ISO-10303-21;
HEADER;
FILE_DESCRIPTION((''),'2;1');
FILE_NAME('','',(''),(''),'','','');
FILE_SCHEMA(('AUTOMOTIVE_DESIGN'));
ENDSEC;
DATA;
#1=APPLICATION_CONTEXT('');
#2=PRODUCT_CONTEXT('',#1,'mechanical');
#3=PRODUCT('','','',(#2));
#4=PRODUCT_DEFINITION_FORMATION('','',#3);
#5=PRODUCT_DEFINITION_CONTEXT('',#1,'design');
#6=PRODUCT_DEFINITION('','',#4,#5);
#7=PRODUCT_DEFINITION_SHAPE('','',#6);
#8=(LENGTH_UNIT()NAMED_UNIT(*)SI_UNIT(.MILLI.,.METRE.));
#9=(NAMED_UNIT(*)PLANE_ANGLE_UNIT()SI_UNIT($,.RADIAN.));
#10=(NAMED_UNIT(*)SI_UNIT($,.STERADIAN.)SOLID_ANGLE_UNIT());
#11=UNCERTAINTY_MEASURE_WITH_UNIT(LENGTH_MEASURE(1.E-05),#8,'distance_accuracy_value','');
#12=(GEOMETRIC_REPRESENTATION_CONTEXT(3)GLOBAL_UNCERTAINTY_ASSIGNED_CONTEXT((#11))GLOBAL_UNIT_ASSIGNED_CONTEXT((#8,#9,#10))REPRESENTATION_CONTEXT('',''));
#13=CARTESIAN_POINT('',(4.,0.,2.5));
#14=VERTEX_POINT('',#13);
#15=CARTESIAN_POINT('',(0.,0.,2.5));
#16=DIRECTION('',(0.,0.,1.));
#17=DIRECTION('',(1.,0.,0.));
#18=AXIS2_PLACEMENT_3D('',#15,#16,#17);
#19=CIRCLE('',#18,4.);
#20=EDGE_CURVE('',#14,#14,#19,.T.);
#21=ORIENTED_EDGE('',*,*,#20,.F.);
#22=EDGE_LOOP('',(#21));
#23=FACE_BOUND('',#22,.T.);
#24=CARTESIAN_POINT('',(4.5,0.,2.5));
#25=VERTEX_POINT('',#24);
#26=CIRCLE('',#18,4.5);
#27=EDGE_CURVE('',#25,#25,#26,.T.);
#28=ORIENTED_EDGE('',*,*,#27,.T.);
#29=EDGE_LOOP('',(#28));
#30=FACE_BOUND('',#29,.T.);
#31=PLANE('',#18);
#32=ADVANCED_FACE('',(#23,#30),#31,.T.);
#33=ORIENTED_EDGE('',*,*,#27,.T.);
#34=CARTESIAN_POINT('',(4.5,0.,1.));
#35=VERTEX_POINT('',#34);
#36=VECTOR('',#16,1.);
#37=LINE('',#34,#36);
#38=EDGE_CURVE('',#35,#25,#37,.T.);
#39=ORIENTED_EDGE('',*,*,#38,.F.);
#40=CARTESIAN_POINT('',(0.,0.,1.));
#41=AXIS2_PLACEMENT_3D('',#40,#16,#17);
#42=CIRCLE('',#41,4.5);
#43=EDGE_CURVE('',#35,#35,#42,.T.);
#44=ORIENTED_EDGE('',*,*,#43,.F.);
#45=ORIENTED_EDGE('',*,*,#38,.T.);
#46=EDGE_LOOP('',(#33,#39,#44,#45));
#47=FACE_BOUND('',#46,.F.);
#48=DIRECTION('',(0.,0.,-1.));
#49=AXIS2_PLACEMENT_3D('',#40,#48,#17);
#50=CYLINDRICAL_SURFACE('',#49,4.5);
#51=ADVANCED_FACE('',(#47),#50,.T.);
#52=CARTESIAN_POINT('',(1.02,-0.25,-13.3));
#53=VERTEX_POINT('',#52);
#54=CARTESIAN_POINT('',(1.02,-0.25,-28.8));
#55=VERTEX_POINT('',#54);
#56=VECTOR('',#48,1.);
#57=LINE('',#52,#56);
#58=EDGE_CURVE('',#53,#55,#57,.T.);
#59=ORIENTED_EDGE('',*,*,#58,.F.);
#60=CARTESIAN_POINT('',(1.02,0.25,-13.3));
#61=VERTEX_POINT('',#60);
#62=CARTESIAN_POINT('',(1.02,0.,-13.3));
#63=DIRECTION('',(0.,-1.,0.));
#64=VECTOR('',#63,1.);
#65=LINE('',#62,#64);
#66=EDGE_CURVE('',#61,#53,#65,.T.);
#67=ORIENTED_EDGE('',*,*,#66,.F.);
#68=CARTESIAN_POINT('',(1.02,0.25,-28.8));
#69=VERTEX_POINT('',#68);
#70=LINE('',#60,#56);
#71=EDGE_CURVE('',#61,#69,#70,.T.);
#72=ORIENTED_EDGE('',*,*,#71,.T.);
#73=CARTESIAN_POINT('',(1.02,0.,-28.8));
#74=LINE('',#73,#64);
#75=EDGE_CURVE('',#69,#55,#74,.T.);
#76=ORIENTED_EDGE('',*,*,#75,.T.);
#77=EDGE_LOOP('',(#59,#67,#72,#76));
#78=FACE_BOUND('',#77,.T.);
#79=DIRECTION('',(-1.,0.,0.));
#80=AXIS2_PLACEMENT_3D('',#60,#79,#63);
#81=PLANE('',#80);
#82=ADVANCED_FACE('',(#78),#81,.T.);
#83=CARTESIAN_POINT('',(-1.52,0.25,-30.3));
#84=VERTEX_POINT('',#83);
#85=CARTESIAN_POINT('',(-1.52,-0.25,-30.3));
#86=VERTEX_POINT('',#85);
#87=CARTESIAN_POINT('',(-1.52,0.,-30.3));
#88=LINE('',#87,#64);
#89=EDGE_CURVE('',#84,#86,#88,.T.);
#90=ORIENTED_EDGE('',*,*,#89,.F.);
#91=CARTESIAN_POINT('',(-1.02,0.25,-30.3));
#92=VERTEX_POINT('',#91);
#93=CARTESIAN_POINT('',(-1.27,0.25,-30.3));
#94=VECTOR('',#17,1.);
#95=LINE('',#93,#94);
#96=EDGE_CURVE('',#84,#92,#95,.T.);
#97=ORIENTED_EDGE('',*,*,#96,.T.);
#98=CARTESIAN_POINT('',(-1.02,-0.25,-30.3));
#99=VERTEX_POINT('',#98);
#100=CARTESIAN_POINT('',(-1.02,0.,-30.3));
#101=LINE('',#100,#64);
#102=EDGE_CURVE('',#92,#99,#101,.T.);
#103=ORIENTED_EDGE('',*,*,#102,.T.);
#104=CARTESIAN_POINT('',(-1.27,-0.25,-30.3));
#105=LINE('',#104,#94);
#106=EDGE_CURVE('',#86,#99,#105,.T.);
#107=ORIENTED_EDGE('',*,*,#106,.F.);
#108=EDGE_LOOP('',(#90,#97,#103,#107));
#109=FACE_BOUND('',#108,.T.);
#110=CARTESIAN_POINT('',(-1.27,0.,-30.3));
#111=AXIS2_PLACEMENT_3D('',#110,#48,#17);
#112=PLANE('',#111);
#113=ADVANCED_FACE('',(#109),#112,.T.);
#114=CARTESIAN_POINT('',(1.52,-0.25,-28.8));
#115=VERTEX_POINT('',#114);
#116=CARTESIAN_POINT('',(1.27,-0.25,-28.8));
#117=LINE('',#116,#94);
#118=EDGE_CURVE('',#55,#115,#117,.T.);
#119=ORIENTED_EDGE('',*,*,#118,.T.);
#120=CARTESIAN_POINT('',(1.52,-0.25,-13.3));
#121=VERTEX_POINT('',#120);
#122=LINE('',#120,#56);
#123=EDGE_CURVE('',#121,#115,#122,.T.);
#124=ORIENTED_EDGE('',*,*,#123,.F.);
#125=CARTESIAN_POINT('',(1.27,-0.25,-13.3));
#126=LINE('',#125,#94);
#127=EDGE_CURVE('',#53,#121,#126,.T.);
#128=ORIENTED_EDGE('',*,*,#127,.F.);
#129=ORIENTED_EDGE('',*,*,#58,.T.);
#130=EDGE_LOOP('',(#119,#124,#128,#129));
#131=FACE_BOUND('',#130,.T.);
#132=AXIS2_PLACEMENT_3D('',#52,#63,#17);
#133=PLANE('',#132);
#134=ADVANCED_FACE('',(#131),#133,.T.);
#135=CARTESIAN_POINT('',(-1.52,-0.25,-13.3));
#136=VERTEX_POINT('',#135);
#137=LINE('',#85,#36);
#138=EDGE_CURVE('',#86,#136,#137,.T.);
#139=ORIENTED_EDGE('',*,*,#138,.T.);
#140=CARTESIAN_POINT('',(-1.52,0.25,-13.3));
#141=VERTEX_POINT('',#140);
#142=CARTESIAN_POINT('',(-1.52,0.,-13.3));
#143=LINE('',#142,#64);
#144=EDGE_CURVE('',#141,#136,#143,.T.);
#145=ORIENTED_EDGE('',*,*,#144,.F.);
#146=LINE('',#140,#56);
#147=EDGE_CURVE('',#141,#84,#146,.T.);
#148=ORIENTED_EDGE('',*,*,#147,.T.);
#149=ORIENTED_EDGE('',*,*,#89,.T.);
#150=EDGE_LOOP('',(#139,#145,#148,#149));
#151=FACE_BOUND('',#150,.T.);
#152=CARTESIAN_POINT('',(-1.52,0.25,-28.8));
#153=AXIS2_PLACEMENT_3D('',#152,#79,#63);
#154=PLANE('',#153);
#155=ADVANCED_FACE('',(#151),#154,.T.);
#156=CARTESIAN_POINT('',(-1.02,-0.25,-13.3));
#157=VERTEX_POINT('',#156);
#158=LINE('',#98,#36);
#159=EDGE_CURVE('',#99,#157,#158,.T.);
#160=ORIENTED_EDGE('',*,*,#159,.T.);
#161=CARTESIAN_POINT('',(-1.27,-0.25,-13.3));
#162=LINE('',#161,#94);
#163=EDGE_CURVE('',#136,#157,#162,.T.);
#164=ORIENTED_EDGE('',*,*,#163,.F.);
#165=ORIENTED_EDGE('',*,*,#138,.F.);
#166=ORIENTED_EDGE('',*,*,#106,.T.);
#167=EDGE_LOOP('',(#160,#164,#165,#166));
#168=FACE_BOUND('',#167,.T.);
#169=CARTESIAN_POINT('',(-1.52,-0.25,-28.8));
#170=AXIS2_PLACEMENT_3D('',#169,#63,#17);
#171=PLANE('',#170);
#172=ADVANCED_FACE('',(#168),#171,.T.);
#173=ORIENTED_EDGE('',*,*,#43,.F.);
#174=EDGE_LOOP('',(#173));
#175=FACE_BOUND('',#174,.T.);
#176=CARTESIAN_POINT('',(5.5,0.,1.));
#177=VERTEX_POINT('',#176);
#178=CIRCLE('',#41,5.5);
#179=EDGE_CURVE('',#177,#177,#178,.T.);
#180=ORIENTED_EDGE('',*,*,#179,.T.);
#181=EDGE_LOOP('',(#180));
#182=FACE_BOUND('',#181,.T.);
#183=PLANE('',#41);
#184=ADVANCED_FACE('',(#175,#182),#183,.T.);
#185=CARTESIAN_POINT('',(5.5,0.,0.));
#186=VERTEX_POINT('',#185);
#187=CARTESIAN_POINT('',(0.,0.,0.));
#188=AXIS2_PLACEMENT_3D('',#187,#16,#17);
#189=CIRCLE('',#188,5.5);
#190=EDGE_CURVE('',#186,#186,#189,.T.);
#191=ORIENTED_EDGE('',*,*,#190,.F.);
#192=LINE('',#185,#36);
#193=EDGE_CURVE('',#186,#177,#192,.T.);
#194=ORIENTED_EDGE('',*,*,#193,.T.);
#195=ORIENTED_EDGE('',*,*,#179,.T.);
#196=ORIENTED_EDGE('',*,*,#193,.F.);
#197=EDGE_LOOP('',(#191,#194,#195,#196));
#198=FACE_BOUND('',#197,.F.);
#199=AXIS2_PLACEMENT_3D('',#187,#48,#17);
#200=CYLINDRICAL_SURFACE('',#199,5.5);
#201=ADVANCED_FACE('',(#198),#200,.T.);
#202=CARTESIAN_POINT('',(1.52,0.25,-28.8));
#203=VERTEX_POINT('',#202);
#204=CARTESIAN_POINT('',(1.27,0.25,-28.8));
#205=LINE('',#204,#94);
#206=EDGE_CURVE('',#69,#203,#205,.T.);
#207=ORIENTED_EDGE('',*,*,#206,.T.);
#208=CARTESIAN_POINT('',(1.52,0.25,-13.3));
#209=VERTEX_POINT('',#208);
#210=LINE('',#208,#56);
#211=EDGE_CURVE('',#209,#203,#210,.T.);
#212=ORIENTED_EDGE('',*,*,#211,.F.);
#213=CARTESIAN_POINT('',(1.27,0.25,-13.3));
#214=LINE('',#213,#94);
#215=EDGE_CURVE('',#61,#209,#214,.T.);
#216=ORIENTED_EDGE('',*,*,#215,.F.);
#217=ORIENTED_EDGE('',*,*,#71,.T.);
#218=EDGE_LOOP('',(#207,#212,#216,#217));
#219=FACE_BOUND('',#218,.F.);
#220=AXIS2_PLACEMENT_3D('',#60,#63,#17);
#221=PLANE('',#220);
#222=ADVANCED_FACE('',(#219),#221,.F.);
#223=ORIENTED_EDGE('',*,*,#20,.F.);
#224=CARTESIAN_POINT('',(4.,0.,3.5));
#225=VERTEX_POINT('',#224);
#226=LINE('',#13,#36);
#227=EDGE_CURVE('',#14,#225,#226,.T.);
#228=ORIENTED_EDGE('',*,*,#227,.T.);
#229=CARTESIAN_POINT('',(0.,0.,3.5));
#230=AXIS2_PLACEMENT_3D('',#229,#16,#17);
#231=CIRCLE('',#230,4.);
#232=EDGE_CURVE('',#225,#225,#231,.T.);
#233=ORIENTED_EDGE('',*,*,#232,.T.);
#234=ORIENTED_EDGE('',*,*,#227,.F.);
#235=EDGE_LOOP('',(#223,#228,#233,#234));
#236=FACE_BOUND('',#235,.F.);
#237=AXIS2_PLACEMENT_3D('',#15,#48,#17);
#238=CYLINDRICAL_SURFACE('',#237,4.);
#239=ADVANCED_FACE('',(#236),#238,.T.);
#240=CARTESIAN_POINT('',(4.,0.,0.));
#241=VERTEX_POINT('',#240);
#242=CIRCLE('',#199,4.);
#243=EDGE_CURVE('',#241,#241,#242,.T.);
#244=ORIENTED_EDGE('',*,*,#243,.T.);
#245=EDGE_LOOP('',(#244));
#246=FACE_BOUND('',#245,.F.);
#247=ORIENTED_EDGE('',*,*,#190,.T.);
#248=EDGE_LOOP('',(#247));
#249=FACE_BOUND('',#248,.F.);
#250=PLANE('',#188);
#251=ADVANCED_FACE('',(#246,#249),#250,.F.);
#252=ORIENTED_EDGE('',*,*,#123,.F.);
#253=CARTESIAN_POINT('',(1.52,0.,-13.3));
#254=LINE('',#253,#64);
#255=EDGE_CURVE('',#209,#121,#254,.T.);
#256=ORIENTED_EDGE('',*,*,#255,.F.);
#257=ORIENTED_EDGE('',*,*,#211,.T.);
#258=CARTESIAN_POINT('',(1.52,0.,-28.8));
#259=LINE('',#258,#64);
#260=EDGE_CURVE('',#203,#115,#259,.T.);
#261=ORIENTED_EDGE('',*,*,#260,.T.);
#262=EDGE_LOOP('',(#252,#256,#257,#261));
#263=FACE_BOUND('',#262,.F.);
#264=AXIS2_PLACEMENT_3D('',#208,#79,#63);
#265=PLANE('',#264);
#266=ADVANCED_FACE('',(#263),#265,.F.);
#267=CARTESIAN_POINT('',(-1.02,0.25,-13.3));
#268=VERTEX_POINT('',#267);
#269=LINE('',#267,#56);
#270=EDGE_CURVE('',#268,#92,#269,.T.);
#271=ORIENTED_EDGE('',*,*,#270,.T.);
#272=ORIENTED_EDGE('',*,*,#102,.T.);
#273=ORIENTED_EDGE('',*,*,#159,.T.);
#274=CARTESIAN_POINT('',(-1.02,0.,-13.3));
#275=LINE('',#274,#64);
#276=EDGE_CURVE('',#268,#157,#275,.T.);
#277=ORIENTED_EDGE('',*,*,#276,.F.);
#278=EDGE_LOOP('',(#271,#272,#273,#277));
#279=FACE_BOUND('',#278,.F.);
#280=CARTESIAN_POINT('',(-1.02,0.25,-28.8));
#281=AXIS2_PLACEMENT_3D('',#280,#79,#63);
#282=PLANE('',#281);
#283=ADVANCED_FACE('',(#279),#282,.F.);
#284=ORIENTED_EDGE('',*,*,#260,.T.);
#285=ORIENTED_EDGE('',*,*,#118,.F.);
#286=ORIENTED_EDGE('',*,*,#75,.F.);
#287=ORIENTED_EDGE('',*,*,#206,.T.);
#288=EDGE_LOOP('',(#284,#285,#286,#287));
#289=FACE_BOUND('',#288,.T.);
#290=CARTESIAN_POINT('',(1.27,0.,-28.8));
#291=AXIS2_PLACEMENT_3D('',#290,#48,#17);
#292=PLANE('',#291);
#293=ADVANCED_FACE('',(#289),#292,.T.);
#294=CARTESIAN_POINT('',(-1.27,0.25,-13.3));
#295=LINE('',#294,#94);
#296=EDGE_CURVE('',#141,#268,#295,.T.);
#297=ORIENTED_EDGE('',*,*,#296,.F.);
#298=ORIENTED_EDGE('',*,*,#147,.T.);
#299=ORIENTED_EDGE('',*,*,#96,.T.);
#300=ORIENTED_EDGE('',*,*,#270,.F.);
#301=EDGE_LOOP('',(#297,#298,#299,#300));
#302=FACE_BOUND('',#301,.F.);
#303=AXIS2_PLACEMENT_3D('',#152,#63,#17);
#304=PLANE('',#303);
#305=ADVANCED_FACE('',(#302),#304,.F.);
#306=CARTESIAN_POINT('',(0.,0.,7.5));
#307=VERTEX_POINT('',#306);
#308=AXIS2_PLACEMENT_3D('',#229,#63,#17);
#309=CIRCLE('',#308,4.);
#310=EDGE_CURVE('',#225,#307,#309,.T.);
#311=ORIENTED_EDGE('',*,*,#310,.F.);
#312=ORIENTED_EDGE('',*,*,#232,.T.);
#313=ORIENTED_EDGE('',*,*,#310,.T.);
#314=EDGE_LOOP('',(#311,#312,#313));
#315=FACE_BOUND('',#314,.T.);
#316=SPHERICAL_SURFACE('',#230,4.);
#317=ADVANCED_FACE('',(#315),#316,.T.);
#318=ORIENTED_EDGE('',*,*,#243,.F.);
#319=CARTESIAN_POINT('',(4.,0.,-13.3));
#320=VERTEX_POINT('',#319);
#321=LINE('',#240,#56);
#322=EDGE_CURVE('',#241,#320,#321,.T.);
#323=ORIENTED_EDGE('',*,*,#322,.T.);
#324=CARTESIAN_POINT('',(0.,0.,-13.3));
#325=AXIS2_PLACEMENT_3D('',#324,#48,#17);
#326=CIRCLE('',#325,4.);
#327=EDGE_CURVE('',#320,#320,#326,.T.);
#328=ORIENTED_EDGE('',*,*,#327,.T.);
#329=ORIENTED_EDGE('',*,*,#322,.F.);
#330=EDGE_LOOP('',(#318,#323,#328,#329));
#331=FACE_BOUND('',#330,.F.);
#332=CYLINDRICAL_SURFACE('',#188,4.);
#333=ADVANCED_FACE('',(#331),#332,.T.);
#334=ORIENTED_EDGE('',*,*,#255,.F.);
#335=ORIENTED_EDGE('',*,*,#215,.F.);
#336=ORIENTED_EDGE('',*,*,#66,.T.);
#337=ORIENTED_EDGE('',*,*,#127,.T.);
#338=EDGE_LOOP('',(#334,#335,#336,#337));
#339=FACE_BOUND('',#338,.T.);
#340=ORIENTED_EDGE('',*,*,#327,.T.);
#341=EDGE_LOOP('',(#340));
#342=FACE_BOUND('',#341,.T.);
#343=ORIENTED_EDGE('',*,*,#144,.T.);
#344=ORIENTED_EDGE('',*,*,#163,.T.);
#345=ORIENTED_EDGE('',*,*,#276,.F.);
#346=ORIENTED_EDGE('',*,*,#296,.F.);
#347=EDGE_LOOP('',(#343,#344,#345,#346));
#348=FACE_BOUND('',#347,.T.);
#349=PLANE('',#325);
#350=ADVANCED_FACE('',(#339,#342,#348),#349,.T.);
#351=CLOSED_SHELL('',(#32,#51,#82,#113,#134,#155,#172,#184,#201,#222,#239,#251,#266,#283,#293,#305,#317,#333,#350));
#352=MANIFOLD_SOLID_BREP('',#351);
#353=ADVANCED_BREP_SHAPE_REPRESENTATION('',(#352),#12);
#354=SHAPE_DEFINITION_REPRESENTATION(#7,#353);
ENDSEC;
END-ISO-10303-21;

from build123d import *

# Parameters (mm, degrees)
F0_R      = 5.5
F1_DEPTH  = 1
F2_R      = 4.5
F3_DEPTH  = 1.5
F4_R      = 4
F5_DEPTH  = 5
F6_R      = 4
F7_R      = 4
F8_DEPTH  = 13.3
F9_W      = 0.5
F9_H      = 0.5
F10_DEPTH = 15.5
F11_W     = 0.5
F11_H     = 0.5
F12_DEPTH = 1.5


with BuildPart() as f1:
    # F0 (on Top) → F1 (new body)
    with BuildSketch(Plane.XY):
        Circle(F0_R)
    extrude(amount=F1_DEPTH)

    # F2 (on face) → F3 (join)
    with BuildSketch(Plane.XY.offset(1)):
        Circle(F2_R)
    extrude(amount=F3_DEPTH)

    # F4 (on face) → F5 (join)
    with BuildSketch(Plane.XY.offset(2.5)):
        Circle(F4_R)
    extrude(amount=F5_DEPTH)

    # F6
    f6_edges = [f1.edges().sort_by_distance(p)[0] for p in [
        (-4, 0, 7.5),
    ]]
    fillet(f6_edges, radius=F6_R)

    # F7 (on face) → F8 (join)
    with BuildSketch(Plane(origin=(0, 0, 0), x_dir=(1, 0, 0), z_dir=(0, 0, -1))):
        Circle(F7_R)
    extrude(amount=F8_DEPTH)

    # F9 (on face) → F10 (join)
    with BuildSketch(Plane(origin=(0, 0, -13.3), x_dir=(1, 0, 0), z_dir=(0, 0, -1))):
        with Locations((-1.27, 0)):
            Rectangle(F9_W, F9_H)
        with Locations((1.27, 0)):
            Rectangle(F9_W, F9_H)
    extrude(amount=F10_DEPTH)

    # F11 (on face) → F12 (join)
    with BuildSketch(Plane(origin=(0, 0, -28.8), x_dir=(1, 0, 0), z_dir=(0, 0, -1))):
        with Locations((-1.27, 0)):
            Rectangle(F11_W, F11_H)
    extrude(amount=F12_DEPTH)


solid = f1.part
